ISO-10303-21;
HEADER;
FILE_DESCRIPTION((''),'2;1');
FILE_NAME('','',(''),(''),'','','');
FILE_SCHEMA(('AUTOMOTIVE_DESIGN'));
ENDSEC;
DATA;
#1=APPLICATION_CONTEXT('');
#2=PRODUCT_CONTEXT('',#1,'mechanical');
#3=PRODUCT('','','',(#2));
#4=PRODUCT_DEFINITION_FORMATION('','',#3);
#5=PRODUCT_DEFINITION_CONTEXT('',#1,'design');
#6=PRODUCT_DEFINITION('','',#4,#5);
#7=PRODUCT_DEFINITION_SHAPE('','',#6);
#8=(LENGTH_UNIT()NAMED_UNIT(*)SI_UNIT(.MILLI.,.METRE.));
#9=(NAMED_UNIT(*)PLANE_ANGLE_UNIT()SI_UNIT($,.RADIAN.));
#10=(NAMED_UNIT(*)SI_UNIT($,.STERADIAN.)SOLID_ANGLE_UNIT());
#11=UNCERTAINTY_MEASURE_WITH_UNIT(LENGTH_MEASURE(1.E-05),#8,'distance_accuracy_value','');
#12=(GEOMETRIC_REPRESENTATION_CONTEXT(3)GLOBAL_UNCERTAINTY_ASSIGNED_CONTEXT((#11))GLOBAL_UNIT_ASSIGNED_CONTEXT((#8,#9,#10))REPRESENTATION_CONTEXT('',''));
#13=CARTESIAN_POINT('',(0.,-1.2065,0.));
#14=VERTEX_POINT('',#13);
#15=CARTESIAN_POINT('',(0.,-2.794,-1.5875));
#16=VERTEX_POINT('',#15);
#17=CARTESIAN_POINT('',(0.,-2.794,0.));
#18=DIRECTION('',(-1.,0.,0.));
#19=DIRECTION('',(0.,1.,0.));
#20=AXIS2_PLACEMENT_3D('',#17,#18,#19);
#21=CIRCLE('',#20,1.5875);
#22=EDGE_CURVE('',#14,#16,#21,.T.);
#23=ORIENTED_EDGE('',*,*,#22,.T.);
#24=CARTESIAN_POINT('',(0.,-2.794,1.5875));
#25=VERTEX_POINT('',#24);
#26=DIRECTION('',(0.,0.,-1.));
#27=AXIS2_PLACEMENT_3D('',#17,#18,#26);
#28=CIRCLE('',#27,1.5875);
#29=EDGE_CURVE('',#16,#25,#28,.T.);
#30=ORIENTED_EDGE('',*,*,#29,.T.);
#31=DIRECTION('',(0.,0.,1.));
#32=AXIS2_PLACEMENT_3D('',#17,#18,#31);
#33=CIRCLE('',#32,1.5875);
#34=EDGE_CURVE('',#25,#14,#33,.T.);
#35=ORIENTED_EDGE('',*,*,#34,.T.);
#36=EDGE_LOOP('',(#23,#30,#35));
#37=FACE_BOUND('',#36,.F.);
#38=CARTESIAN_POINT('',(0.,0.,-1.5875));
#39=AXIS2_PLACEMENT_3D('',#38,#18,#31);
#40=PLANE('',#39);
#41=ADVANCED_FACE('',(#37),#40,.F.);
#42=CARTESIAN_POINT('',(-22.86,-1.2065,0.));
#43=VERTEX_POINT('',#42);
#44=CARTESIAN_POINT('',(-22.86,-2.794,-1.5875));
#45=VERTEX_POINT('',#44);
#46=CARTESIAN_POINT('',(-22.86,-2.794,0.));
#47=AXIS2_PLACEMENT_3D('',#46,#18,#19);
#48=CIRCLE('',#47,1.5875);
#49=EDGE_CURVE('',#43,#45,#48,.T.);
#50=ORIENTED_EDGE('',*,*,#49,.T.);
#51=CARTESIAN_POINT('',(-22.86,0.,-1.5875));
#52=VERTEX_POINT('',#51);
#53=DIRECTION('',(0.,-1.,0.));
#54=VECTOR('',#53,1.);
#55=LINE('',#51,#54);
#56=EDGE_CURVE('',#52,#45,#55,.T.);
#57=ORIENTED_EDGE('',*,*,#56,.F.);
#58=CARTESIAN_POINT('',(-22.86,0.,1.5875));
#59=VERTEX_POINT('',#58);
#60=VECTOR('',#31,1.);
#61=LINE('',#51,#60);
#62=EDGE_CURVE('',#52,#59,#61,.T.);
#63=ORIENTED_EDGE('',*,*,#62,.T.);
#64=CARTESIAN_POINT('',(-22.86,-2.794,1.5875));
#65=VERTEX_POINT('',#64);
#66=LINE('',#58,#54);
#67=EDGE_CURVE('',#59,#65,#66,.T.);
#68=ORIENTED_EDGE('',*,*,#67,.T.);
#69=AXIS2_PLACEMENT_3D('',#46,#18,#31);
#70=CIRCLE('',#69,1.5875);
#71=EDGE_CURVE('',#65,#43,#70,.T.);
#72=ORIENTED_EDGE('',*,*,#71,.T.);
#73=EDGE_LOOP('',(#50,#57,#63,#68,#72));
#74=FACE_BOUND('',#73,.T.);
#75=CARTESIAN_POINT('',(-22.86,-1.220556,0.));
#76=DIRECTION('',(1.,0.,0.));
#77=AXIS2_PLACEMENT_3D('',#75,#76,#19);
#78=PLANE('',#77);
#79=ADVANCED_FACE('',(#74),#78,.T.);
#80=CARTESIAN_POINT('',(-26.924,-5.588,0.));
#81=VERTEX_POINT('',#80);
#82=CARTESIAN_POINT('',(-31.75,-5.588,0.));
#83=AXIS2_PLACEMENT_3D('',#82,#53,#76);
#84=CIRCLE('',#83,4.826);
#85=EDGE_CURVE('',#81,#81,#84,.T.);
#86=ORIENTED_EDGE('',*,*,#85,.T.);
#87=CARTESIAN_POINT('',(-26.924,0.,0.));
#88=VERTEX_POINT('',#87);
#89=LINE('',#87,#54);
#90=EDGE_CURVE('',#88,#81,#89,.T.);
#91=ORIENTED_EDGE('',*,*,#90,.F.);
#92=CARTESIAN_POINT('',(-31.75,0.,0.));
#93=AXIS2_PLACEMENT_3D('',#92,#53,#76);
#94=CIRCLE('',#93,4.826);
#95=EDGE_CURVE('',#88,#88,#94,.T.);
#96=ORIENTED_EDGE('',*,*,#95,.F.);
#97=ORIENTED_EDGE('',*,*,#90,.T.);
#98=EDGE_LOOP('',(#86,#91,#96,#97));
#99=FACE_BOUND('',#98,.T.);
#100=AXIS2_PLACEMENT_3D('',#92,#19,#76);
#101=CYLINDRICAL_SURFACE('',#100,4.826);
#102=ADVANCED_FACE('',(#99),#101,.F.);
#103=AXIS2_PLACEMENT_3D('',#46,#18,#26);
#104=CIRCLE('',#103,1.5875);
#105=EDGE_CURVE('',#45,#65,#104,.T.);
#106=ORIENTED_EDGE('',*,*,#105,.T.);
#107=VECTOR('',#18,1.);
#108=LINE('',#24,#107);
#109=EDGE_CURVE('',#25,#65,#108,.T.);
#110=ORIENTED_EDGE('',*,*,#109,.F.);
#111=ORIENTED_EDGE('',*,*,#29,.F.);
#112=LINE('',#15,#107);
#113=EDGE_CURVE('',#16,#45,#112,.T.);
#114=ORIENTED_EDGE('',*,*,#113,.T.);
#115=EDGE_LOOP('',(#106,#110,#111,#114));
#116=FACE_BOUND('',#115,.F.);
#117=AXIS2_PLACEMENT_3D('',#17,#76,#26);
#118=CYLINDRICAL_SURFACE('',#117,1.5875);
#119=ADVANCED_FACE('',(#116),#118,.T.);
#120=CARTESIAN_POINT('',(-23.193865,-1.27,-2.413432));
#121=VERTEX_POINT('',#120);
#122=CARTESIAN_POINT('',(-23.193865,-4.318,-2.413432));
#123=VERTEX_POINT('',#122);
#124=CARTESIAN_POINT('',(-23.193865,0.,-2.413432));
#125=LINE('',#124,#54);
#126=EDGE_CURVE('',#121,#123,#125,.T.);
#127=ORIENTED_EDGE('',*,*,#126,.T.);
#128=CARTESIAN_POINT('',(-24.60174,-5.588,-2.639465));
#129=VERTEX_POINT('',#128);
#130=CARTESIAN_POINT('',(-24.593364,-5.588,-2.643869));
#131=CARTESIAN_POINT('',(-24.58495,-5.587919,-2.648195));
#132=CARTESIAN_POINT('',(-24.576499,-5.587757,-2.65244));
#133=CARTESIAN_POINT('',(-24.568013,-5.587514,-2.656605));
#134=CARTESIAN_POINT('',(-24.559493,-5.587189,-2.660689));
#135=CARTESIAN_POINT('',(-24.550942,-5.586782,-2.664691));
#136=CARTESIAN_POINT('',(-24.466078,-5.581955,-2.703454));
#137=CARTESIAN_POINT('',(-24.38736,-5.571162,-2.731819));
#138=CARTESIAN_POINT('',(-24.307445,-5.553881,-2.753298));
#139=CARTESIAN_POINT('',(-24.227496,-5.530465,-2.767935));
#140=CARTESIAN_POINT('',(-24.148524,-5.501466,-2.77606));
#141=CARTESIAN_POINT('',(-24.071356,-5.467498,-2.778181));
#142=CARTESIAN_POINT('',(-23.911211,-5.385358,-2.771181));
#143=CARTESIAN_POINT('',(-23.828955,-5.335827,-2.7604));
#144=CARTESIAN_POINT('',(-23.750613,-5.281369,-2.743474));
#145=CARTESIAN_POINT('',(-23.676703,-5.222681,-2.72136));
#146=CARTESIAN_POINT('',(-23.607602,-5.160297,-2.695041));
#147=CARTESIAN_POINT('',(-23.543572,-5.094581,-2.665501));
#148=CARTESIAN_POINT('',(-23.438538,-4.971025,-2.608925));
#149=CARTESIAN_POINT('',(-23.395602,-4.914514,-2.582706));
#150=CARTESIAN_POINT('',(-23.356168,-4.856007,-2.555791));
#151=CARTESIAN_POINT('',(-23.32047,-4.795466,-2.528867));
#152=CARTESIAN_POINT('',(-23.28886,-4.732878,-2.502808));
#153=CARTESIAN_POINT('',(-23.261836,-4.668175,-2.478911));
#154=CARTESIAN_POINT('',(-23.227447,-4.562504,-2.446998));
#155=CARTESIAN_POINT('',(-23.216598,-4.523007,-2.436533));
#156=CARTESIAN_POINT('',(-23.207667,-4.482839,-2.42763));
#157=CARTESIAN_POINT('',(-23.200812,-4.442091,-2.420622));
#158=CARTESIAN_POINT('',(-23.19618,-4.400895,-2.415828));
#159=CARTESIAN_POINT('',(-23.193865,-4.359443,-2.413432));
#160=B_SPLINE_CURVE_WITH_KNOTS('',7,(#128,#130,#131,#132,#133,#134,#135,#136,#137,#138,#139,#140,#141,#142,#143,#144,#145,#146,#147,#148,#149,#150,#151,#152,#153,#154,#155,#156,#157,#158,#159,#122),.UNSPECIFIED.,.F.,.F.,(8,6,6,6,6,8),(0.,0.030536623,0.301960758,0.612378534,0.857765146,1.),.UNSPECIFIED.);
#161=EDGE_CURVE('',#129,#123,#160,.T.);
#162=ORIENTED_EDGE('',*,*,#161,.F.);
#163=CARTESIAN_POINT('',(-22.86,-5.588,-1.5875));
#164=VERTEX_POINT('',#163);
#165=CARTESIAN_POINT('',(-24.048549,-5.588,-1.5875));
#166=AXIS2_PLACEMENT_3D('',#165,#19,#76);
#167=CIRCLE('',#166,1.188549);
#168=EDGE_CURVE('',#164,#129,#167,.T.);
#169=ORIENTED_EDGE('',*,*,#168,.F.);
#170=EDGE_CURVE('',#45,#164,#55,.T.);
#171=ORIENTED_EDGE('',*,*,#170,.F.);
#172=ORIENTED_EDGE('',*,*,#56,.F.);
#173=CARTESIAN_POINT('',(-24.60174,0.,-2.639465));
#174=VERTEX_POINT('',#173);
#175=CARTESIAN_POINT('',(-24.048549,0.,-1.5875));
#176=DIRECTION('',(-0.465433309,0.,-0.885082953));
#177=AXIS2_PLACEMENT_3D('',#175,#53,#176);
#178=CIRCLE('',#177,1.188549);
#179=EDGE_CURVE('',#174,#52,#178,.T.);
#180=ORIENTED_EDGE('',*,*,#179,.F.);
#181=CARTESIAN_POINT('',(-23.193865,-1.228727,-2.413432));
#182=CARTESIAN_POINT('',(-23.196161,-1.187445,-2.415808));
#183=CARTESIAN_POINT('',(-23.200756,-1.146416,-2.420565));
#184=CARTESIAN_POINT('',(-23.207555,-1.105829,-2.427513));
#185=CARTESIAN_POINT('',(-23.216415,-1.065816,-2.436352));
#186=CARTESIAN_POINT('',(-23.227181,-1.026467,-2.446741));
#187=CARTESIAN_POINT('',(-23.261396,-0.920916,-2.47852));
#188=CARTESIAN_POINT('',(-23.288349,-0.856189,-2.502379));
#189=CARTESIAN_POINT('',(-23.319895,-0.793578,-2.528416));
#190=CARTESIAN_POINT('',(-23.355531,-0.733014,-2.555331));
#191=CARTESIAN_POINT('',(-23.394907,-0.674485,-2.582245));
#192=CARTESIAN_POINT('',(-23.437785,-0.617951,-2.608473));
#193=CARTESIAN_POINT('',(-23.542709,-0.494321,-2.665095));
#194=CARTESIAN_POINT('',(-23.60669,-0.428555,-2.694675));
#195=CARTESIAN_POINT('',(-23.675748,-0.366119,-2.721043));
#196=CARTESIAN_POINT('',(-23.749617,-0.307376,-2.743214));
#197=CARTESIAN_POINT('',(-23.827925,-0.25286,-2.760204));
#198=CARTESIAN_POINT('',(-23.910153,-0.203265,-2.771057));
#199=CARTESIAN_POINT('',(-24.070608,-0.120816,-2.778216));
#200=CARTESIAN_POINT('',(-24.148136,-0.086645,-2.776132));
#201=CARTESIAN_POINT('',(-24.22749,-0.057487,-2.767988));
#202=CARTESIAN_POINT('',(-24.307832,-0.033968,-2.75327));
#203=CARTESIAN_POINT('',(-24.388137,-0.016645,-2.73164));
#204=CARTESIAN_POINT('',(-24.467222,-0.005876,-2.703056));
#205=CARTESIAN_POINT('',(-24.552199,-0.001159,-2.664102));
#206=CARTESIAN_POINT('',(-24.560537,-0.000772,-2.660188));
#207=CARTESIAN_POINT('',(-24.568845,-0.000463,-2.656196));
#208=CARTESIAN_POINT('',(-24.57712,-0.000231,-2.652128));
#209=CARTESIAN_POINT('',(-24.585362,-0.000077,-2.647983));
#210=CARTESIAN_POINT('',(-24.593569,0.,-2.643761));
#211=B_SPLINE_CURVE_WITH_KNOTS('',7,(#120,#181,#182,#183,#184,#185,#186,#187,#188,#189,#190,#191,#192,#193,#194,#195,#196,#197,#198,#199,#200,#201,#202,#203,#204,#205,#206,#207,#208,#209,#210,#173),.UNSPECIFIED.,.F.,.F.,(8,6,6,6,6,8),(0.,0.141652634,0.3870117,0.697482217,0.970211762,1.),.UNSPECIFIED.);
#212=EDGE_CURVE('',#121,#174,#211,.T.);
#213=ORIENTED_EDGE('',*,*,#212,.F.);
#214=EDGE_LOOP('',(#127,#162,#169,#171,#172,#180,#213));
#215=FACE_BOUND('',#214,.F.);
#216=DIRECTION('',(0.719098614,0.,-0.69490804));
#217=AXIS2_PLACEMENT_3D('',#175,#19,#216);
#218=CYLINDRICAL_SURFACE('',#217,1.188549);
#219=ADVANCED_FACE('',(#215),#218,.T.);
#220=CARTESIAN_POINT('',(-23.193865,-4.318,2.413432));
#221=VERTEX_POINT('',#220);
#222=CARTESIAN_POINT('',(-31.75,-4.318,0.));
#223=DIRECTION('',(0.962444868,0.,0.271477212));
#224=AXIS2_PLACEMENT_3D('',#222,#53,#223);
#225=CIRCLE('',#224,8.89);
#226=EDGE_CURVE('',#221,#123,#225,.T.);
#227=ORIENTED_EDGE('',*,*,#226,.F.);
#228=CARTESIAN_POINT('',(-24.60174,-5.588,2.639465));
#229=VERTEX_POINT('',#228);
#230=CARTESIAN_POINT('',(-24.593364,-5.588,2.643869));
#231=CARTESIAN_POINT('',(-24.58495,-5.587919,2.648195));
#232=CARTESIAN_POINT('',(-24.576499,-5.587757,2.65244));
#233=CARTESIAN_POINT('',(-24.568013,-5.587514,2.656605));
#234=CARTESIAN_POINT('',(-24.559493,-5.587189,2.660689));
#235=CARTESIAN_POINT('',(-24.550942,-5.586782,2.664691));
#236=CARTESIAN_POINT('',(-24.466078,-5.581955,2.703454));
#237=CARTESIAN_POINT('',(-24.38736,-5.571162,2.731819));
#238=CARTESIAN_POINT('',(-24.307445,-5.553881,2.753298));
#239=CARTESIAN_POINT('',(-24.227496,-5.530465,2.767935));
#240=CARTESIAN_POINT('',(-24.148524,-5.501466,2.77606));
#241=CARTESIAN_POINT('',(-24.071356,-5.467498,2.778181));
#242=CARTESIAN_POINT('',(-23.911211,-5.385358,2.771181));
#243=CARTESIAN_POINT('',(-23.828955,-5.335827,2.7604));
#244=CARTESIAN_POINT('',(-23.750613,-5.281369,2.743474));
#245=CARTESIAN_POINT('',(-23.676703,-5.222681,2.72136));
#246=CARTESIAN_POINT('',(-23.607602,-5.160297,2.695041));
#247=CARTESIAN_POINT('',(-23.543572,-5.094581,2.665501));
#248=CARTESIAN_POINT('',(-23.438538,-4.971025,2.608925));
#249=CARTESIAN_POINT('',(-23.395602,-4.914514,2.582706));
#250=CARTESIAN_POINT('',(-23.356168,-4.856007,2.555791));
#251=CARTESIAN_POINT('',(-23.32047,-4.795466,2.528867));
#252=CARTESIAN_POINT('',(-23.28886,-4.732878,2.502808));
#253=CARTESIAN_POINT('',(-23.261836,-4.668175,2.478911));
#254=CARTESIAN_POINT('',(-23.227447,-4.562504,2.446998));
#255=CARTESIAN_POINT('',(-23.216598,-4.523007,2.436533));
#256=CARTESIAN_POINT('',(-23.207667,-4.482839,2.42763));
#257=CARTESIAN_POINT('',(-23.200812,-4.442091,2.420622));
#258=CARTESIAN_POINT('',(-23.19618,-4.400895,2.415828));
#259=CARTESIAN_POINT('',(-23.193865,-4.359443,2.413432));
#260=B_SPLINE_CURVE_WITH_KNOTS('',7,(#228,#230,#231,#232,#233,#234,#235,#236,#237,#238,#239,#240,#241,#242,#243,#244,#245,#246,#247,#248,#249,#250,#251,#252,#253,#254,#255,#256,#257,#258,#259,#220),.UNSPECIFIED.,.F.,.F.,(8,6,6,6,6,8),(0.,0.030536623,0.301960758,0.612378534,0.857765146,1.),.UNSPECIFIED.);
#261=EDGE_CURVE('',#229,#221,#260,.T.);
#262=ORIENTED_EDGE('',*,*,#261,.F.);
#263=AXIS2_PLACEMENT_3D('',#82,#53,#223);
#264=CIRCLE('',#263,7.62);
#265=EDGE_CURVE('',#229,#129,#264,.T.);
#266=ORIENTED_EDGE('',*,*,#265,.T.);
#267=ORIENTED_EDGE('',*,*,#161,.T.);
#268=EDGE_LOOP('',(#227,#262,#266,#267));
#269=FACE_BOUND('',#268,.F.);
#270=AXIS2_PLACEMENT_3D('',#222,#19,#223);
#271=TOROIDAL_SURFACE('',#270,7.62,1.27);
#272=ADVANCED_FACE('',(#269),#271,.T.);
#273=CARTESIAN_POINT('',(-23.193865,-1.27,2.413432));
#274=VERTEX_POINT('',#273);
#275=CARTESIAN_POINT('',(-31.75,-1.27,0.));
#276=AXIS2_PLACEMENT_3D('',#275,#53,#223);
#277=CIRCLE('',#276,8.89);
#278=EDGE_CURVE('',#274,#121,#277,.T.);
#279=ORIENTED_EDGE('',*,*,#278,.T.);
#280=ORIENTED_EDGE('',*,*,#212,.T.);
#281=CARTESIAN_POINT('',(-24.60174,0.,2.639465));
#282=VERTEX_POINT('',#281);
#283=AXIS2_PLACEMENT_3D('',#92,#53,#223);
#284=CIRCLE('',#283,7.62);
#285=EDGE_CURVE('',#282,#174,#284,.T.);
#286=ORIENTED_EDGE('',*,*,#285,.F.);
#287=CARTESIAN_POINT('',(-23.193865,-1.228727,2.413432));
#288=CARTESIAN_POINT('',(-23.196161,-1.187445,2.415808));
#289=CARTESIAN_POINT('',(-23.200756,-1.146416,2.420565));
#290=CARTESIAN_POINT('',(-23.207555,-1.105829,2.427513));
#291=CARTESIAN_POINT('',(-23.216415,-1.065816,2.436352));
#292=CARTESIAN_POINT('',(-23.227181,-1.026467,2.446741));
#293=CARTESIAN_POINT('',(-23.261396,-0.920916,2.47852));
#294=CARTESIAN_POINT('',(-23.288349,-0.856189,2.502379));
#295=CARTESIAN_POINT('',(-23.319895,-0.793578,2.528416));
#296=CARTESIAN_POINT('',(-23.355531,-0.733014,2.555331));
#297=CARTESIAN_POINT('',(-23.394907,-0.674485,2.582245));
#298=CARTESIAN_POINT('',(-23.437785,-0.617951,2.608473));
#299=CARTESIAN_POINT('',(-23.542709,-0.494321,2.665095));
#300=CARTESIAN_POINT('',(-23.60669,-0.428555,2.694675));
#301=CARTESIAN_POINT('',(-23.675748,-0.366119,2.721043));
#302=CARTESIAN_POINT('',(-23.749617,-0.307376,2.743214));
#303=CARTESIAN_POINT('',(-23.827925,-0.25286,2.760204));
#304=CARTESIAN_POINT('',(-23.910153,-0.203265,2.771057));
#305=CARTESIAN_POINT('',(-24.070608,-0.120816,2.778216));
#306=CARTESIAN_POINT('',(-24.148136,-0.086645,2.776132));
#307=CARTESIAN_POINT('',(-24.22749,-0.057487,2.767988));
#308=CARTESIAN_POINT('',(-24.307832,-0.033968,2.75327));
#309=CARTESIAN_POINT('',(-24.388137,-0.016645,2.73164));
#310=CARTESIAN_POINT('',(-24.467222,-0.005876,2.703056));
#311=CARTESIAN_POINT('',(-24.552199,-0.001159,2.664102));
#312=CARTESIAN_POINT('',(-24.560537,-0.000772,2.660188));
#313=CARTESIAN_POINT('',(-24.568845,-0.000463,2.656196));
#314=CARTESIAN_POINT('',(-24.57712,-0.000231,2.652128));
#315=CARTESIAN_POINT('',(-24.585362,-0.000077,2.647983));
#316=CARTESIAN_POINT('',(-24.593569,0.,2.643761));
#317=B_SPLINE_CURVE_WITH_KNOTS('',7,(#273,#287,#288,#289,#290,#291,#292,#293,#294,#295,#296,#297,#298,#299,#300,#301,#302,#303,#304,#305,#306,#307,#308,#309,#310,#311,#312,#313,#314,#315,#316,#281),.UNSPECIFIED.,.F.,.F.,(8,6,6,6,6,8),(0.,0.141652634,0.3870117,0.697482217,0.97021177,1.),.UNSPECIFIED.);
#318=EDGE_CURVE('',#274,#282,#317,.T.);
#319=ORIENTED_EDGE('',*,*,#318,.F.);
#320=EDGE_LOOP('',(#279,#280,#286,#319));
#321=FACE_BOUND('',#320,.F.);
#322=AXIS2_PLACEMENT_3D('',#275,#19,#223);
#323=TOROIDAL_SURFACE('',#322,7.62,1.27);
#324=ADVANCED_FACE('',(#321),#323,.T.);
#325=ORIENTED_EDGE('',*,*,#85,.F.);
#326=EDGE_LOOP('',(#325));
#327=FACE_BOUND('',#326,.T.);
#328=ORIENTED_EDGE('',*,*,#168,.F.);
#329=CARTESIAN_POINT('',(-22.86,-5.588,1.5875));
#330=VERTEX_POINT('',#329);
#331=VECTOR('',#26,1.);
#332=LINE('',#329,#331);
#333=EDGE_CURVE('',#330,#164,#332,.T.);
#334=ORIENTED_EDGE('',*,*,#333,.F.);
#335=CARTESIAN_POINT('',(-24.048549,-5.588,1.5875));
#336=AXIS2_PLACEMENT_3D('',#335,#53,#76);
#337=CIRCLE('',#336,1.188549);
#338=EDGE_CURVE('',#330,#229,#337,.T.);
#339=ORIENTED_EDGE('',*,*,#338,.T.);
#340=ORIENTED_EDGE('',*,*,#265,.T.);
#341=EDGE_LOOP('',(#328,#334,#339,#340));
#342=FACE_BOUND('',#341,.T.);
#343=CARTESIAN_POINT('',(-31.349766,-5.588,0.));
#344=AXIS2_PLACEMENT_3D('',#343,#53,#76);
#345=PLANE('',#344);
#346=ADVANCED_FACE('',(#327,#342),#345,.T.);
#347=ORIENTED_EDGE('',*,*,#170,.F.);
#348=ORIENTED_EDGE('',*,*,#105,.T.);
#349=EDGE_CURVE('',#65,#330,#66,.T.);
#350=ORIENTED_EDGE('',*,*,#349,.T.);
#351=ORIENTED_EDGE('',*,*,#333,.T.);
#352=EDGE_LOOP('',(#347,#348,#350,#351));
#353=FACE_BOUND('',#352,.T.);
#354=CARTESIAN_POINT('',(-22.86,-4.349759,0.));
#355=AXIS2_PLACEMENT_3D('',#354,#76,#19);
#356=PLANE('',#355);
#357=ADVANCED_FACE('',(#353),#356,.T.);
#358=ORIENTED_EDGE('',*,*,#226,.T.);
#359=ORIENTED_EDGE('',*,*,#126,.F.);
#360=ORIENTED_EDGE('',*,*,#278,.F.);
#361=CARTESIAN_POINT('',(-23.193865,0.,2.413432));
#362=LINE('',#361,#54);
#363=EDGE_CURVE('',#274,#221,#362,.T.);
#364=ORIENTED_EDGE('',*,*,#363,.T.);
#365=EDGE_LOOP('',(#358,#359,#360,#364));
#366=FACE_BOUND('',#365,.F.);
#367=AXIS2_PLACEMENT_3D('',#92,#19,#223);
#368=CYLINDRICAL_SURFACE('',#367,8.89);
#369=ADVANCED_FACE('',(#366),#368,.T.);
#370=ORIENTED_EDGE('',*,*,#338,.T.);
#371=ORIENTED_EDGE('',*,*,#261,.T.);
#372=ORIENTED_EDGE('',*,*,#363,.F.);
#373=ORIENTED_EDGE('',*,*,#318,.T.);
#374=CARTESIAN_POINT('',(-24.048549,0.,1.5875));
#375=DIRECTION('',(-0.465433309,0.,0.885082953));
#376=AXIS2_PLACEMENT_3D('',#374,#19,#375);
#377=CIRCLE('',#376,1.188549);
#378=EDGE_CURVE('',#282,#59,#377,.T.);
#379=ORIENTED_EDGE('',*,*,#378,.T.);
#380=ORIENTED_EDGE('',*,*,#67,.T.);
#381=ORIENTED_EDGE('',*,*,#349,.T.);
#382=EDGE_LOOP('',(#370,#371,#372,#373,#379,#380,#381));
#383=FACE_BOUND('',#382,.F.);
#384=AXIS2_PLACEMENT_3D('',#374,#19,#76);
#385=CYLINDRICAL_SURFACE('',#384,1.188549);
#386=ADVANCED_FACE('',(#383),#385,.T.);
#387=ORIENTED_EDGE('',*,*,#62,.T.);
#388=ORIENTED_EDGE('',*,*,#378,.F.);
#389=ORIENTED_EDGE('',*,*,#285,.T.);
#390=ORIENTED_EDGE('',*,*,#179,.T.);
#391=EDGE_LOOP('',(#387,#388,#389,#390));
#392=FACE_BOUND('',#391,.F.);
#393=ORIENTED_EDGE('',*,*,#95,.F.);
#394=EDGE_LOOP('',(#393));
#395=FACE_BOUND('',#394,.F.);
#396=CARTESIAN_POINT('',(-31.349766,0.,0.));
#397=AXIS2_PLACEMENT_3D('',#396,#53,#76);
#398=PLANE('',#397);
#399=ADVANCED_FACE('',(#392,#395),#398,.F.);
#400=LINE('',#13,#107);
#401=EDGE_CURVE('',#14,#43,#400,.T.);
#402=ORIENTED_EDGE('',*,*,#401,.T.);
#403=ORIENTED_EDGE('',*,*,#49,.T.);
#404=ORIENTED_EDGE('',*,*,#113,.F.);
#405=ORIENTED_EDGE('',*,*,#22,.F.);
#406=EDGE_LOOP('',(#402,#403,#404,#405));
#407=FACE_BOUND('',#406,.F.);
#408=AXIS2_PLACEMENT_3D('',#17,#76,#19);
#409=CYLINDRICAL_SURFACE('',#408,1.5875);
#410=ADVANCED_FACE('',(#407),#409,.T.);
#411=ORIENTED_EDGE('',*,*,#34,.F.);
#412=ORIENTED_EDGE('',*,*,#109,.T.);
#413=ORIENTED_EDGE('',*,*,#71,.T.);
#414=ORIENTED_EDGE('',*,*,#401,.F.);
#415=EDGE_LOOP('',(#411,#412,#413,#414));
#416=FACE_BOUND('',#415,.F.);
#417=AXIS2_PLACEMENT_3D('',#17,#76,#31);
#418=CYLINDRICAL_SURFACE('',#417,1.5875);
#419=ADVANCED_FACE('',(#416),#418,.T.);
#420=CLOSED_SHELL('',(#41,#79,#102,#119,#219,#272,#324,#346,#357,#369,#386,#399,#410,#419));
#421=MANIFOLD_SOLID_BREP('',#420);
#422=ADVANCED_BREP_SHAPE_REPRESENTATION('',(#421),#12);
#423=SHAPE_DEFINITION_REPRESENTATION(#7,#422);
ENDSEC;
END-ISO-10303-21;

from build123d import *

# Parameters (mm, degrees)
F0_R     = 4.826
F1_DEPTH = 5.588
F3_DEPTH = 22.86
F4_R     = 1.27
F5_R     = 1.27


# Not quite as in the source:
# - a feature names something its author has since deleted; it is built from what else it names


with BuildPart() as f1:
    # F0 (on Front) → F1 (new body)
    with BuildSketch(Plane.XZ):
        with BuildLine():
            Line((-22.86, -1.5875), (-22.86, 1.5875))
            ThreePointArc((-22.86, 1.5875), (-22.9466228701, 2.0329296457), (-23.1938651263, 2.4134324153))
            ThreePointArc((-23.1938651263, 2.4134324153), (-40.64, 0), (-23.1938651263, -2.4134324153))
            ThreePointArc((-23.1938651263, -2.4134324153), (-22.9466228701, -2.0329296457), (-22.86, -1.5875))
        make_face()
        with Locations((-31.75, 0)):
            Circle(F0_R, mode=Mode.SUBTRACT)
        Polygon((0, -1.5875), (0, 0), (0, 1.5875), (-22.86, 1.5875), (-22.86, -1.5875), align=None)
    extrude(amount=F1_DEPTH)

    # F2 (on face) → F3 (cut, through all)
    with BuildSketch(Plane.YZ):
        with BuildLine():
            ThreePointArc((-2.794, -1.5875), (-4.3815, 0), (-2.794, 1.5875))
            Line((-2.794, 1.5875), (-5.588, 1.5875))
            Line((-5.588, 1.5875), (-5.588, -1.5875))
            Line((-5.588, -1.5875), (-2.794, -1.5875))
        make_face()
        with BuildLine():
            ThreePointArc((-2.794, 1.5875), (-1.6714679849, 1.1225320151), (-1.2065, 0))
            ThreePointArc((-1.2065, 0), (-1.6714679849, -1.1225320151), (-2.794, -1.5875))
            Line((-2.794, -1.5875), (0, -1.5875))
            Line((0, -1.5875), (0, 1.5875))
            Line((0, 1.5875), (-2.794, 1.5875))
        make_face()
    extrude(amount=-F3_DEPTH, mode=Mode.SUBTRACT)

    # F4
    f4_edges = [f1.edges().sort_by_distance(p)[0] for p in [
        (-40.64, 0, 0),
    ]]
    fillet(f4_edges, radius=F4_R)

    # F5
    f5_edges = [f1.edges().sort_by_distance(p)[0] for p in [
        (-40.64, -5.588, 0),
    ]]
    fillet(f5_edges, radius=F5_R)


solid = f1.part
